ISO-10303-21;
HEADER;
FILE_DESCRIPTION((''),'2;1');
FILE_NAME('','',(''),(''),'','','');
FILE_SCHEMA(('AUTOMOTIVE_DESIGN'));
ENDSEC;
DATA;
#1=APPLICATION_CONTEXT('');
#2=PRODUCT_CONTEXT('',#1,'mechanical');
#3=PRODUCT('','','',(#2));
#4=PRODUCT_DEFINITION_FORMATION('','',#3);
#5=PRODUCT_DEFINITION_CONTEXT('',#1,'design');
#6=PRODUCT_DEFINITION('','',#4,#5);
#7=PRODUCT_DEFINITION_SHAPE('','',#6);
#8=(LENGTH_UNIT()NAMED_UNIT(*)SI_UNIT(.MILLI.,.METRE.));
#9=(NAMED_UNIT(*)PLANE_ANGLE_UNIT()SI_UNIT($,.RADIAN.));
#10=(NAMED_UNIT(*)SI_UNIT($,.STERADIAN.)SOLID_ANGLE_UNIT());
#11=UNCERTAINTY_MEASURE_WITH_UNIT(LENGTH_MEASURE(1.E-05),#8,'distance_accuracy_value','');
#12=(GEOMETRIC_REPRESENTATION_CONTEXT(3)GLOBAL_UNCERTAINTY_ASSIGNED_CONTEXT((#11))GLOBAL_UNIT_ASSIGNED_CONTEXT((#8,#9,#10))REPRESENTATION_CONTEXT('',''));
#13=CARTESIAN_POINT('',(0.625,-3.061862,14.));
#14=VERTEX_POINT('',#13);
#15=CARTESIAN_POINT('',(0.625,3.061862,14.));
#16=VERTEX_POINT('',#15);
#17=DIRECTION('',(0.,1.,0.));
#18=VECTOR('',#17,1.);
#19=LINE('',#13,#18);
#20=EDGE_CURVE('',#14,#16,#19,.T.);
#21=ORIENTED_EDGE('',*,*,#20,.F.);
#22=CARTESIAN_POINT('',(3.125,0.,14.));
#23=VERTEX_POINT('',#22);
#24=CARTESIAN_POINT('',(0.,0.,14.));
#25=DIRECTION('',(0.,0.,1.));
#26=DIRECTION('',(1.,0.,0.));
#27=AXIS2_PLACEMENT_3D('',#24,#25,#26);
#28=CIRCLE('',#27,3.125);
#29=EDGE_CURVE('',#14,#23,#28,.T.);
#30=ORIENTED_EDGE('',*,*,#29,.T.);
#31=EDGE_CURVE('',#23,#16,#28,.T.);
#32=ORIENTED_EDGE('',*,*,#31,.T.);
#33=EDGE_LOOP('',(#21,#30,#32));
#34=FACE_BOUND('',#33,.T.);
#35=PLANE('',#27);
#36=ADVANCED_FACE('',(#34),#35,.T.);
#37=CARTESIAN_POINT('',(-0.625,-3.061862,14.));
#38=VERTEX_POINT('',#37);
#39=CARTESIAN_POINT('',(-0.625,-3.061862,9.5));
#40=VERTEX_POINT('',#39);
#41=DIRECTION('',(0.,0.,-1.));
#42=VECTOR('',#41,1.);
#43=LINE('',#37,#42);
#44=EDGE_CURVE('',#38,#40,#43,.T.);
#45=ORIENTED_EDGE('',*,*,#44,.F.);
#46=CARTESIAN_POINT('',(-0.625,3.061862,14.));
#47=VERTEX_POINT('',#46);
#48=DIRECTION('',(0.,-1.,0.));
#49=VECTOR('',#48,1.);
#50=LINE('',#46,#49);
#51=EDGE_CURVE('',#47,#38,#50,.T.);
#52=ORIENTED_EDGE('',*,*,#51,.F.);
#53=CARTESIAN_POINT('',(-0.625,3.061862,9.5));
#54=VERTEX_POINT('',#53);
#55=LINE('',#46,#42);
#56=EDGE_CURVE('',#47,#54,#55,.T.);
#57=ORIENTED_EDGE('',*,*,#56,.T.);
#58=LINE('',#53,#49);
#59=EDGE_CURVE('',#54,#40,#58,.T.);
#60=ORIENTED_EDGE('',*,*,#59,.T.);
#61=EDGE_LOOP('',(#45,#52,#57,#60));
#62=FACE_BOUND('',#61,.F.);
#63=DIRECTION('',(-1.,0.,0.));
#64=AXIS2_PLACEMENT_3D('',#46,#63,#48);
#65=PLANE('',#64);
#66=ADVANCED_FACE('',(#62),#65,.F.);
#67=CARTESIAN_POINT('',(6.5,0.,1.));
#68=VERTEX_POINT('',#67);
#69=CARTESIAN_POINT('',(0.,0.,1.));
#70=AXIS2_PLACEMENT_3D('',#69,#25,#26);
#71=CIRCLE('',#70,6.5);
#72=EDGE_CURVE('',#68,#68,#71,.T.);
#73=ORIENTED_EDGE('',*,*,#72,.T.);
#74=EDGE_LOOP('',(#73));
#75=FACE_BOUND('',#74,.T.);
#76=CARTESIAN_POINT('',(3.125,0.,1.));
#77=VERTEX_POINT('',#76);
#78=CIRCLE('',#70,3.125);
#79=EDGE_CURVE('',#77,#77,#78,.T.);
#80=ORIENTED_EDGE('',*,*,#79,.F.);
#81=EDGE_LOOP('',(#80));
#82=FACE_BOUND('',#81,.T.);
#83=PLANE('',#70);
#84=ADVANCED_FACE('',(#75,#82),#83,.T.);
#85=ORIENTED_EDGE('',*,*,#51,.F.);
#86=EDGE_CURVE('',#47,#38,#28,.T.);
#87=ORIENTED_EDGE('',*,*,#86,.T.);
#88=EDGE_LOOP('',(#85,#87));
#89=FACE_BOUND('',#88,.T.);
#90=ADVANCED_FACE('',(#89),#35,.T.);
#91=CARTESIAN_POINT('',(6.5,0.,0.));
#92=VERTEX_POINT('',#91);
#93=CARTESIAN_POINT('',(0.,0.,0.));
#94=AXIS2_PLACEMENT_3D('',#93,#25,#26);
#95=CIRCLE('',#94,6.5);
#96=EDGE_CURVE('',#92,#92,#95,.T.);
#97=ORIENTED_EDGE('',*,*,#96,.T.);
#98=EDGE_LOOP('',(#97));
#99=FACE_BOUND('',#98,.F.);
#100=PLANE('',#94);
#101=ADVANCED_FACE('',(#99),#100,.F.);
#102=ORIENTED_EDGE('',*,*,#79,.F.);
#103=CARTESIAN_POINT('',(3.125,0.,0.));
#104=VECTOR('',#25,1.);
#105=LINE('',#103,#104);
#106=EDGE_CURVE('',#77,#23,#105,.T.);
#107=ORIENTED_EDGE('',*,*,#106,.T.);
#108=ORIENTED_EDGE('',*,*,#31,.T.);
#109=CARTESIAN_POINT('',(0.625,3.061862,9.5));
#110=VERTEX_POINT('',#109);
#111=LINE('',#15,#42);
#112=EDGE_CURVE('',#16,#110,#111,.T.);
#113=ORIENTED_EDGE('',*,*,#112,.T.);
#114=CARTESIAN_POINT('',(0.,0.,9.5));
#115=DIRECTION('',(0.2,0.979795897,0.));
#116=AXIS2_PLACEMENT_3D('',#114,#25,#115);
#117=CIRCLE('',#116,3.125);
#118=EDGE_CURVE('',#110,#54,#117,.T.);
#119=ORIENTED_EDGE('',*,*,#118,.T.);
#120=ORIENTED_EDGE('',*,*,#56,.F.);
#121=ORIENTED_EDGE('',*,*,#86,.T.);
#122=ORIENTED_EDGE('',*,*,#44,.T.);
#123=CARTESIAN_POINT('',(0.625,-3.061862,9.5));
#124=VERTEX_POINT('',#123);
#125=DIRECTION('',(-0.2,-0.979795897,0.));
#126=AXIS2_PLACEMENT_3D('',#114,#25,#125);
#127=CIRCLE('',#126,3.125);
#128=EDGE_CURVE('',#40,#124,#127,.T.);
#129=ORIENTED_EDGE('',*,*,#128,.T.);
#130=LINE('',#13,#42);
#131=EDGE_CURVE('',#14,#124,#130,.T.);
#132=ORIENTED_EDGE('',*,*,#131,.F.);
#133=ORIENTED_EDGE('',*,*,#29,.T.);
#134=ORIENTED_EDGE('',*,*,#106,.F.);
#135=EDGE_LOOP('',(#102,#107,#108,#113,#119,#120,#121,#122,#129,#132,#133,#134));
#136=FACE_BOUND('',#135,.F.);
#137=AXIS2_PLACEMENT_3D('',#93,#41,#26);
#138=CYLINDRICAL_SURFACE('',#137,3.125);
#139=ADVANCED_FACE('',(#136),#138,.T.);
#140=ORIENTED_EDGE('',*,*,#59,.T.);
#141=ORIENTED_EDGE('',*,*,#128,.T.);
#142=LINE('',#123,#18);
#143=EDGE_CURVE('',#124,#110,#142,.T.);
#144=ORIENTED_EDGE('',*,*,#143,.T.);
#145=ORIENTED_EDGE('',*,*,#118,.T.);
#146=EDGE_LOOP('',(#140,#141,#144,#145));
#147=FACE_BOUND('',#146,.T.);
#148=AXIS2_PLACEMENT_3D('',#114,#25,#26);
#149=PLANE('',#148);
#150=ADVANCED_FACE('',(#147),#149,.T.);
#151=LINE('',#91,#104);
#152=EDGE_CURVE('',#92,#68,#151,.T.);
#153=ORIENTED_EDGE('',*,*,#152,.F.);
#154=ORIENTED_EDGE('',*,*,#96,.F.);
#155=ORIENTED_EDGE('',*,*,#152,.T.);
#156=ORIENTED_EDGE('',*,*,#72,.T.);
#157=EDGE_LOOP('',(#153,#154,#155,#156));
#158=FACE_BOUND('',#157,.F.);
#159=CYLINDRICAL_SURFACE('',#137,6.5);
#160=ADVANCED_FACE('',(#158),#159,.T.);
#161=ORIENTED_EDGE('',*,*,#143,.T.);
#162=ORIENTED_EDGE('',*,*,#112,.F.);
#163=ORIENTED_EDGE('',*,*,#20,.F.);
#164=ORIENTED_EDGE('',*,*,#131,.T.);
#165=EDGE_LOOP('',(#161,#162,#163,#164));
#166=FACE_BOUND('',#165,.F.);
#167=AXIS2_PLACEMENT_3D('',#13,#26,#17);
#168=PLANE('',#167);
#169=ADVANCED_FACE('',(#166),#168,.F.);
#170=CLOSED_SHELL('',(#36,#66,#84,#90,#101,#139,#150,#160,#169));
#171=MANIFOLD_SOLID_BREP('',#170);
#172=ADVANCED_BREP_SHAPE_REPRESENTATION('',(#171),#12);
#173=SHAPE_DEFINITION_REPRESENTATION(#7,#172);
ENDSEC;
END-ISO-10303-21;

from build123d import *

# Parameters (mm, degrees)
F0_R     = 3.125
F1_DEPTH = 14
F0_R_2   = 6.5
F2_DEPTH = 1
F4_DEPTH = 4.5


with BuildPart() as f1:
    # F0 (on Top) → F1 (new body)
    with BuildSketch(Plane.XY):
        Circle(F0_R)
    extrude(amount=F1_DEPTH)

    # F0 (on Top) → F2 (join)
    with BuildSketch(Plane.XY):
        Circle(F0_R_2)
        Circle(F0_R, mode=Mode.SUBTRACT)
    extrude(amount=F2_DEPTH)

    # F3 (on face) → F4 (cut)
    with BuildSketch(Plane.XY.offset(14)):
        with BuildLine():
            Line((0.625, -3.0618621785), (0.625, 3.0618621785))
            ThreePointArc((0.625, 3.0618621785), (0, 3.125), (-0.625, 3.0618621785))
            Line((-0.625, 3.0618621785), (-0.625, -3.0618621785))
            ThreePointArc((-0.625, -3.0618621785), (0, -3.125), (0.625, -3.0618621785))
        make_face()
    extrude(amount=-F4_DEPTH, mode=Mode.SUBTRACT)


solid = f1.part
